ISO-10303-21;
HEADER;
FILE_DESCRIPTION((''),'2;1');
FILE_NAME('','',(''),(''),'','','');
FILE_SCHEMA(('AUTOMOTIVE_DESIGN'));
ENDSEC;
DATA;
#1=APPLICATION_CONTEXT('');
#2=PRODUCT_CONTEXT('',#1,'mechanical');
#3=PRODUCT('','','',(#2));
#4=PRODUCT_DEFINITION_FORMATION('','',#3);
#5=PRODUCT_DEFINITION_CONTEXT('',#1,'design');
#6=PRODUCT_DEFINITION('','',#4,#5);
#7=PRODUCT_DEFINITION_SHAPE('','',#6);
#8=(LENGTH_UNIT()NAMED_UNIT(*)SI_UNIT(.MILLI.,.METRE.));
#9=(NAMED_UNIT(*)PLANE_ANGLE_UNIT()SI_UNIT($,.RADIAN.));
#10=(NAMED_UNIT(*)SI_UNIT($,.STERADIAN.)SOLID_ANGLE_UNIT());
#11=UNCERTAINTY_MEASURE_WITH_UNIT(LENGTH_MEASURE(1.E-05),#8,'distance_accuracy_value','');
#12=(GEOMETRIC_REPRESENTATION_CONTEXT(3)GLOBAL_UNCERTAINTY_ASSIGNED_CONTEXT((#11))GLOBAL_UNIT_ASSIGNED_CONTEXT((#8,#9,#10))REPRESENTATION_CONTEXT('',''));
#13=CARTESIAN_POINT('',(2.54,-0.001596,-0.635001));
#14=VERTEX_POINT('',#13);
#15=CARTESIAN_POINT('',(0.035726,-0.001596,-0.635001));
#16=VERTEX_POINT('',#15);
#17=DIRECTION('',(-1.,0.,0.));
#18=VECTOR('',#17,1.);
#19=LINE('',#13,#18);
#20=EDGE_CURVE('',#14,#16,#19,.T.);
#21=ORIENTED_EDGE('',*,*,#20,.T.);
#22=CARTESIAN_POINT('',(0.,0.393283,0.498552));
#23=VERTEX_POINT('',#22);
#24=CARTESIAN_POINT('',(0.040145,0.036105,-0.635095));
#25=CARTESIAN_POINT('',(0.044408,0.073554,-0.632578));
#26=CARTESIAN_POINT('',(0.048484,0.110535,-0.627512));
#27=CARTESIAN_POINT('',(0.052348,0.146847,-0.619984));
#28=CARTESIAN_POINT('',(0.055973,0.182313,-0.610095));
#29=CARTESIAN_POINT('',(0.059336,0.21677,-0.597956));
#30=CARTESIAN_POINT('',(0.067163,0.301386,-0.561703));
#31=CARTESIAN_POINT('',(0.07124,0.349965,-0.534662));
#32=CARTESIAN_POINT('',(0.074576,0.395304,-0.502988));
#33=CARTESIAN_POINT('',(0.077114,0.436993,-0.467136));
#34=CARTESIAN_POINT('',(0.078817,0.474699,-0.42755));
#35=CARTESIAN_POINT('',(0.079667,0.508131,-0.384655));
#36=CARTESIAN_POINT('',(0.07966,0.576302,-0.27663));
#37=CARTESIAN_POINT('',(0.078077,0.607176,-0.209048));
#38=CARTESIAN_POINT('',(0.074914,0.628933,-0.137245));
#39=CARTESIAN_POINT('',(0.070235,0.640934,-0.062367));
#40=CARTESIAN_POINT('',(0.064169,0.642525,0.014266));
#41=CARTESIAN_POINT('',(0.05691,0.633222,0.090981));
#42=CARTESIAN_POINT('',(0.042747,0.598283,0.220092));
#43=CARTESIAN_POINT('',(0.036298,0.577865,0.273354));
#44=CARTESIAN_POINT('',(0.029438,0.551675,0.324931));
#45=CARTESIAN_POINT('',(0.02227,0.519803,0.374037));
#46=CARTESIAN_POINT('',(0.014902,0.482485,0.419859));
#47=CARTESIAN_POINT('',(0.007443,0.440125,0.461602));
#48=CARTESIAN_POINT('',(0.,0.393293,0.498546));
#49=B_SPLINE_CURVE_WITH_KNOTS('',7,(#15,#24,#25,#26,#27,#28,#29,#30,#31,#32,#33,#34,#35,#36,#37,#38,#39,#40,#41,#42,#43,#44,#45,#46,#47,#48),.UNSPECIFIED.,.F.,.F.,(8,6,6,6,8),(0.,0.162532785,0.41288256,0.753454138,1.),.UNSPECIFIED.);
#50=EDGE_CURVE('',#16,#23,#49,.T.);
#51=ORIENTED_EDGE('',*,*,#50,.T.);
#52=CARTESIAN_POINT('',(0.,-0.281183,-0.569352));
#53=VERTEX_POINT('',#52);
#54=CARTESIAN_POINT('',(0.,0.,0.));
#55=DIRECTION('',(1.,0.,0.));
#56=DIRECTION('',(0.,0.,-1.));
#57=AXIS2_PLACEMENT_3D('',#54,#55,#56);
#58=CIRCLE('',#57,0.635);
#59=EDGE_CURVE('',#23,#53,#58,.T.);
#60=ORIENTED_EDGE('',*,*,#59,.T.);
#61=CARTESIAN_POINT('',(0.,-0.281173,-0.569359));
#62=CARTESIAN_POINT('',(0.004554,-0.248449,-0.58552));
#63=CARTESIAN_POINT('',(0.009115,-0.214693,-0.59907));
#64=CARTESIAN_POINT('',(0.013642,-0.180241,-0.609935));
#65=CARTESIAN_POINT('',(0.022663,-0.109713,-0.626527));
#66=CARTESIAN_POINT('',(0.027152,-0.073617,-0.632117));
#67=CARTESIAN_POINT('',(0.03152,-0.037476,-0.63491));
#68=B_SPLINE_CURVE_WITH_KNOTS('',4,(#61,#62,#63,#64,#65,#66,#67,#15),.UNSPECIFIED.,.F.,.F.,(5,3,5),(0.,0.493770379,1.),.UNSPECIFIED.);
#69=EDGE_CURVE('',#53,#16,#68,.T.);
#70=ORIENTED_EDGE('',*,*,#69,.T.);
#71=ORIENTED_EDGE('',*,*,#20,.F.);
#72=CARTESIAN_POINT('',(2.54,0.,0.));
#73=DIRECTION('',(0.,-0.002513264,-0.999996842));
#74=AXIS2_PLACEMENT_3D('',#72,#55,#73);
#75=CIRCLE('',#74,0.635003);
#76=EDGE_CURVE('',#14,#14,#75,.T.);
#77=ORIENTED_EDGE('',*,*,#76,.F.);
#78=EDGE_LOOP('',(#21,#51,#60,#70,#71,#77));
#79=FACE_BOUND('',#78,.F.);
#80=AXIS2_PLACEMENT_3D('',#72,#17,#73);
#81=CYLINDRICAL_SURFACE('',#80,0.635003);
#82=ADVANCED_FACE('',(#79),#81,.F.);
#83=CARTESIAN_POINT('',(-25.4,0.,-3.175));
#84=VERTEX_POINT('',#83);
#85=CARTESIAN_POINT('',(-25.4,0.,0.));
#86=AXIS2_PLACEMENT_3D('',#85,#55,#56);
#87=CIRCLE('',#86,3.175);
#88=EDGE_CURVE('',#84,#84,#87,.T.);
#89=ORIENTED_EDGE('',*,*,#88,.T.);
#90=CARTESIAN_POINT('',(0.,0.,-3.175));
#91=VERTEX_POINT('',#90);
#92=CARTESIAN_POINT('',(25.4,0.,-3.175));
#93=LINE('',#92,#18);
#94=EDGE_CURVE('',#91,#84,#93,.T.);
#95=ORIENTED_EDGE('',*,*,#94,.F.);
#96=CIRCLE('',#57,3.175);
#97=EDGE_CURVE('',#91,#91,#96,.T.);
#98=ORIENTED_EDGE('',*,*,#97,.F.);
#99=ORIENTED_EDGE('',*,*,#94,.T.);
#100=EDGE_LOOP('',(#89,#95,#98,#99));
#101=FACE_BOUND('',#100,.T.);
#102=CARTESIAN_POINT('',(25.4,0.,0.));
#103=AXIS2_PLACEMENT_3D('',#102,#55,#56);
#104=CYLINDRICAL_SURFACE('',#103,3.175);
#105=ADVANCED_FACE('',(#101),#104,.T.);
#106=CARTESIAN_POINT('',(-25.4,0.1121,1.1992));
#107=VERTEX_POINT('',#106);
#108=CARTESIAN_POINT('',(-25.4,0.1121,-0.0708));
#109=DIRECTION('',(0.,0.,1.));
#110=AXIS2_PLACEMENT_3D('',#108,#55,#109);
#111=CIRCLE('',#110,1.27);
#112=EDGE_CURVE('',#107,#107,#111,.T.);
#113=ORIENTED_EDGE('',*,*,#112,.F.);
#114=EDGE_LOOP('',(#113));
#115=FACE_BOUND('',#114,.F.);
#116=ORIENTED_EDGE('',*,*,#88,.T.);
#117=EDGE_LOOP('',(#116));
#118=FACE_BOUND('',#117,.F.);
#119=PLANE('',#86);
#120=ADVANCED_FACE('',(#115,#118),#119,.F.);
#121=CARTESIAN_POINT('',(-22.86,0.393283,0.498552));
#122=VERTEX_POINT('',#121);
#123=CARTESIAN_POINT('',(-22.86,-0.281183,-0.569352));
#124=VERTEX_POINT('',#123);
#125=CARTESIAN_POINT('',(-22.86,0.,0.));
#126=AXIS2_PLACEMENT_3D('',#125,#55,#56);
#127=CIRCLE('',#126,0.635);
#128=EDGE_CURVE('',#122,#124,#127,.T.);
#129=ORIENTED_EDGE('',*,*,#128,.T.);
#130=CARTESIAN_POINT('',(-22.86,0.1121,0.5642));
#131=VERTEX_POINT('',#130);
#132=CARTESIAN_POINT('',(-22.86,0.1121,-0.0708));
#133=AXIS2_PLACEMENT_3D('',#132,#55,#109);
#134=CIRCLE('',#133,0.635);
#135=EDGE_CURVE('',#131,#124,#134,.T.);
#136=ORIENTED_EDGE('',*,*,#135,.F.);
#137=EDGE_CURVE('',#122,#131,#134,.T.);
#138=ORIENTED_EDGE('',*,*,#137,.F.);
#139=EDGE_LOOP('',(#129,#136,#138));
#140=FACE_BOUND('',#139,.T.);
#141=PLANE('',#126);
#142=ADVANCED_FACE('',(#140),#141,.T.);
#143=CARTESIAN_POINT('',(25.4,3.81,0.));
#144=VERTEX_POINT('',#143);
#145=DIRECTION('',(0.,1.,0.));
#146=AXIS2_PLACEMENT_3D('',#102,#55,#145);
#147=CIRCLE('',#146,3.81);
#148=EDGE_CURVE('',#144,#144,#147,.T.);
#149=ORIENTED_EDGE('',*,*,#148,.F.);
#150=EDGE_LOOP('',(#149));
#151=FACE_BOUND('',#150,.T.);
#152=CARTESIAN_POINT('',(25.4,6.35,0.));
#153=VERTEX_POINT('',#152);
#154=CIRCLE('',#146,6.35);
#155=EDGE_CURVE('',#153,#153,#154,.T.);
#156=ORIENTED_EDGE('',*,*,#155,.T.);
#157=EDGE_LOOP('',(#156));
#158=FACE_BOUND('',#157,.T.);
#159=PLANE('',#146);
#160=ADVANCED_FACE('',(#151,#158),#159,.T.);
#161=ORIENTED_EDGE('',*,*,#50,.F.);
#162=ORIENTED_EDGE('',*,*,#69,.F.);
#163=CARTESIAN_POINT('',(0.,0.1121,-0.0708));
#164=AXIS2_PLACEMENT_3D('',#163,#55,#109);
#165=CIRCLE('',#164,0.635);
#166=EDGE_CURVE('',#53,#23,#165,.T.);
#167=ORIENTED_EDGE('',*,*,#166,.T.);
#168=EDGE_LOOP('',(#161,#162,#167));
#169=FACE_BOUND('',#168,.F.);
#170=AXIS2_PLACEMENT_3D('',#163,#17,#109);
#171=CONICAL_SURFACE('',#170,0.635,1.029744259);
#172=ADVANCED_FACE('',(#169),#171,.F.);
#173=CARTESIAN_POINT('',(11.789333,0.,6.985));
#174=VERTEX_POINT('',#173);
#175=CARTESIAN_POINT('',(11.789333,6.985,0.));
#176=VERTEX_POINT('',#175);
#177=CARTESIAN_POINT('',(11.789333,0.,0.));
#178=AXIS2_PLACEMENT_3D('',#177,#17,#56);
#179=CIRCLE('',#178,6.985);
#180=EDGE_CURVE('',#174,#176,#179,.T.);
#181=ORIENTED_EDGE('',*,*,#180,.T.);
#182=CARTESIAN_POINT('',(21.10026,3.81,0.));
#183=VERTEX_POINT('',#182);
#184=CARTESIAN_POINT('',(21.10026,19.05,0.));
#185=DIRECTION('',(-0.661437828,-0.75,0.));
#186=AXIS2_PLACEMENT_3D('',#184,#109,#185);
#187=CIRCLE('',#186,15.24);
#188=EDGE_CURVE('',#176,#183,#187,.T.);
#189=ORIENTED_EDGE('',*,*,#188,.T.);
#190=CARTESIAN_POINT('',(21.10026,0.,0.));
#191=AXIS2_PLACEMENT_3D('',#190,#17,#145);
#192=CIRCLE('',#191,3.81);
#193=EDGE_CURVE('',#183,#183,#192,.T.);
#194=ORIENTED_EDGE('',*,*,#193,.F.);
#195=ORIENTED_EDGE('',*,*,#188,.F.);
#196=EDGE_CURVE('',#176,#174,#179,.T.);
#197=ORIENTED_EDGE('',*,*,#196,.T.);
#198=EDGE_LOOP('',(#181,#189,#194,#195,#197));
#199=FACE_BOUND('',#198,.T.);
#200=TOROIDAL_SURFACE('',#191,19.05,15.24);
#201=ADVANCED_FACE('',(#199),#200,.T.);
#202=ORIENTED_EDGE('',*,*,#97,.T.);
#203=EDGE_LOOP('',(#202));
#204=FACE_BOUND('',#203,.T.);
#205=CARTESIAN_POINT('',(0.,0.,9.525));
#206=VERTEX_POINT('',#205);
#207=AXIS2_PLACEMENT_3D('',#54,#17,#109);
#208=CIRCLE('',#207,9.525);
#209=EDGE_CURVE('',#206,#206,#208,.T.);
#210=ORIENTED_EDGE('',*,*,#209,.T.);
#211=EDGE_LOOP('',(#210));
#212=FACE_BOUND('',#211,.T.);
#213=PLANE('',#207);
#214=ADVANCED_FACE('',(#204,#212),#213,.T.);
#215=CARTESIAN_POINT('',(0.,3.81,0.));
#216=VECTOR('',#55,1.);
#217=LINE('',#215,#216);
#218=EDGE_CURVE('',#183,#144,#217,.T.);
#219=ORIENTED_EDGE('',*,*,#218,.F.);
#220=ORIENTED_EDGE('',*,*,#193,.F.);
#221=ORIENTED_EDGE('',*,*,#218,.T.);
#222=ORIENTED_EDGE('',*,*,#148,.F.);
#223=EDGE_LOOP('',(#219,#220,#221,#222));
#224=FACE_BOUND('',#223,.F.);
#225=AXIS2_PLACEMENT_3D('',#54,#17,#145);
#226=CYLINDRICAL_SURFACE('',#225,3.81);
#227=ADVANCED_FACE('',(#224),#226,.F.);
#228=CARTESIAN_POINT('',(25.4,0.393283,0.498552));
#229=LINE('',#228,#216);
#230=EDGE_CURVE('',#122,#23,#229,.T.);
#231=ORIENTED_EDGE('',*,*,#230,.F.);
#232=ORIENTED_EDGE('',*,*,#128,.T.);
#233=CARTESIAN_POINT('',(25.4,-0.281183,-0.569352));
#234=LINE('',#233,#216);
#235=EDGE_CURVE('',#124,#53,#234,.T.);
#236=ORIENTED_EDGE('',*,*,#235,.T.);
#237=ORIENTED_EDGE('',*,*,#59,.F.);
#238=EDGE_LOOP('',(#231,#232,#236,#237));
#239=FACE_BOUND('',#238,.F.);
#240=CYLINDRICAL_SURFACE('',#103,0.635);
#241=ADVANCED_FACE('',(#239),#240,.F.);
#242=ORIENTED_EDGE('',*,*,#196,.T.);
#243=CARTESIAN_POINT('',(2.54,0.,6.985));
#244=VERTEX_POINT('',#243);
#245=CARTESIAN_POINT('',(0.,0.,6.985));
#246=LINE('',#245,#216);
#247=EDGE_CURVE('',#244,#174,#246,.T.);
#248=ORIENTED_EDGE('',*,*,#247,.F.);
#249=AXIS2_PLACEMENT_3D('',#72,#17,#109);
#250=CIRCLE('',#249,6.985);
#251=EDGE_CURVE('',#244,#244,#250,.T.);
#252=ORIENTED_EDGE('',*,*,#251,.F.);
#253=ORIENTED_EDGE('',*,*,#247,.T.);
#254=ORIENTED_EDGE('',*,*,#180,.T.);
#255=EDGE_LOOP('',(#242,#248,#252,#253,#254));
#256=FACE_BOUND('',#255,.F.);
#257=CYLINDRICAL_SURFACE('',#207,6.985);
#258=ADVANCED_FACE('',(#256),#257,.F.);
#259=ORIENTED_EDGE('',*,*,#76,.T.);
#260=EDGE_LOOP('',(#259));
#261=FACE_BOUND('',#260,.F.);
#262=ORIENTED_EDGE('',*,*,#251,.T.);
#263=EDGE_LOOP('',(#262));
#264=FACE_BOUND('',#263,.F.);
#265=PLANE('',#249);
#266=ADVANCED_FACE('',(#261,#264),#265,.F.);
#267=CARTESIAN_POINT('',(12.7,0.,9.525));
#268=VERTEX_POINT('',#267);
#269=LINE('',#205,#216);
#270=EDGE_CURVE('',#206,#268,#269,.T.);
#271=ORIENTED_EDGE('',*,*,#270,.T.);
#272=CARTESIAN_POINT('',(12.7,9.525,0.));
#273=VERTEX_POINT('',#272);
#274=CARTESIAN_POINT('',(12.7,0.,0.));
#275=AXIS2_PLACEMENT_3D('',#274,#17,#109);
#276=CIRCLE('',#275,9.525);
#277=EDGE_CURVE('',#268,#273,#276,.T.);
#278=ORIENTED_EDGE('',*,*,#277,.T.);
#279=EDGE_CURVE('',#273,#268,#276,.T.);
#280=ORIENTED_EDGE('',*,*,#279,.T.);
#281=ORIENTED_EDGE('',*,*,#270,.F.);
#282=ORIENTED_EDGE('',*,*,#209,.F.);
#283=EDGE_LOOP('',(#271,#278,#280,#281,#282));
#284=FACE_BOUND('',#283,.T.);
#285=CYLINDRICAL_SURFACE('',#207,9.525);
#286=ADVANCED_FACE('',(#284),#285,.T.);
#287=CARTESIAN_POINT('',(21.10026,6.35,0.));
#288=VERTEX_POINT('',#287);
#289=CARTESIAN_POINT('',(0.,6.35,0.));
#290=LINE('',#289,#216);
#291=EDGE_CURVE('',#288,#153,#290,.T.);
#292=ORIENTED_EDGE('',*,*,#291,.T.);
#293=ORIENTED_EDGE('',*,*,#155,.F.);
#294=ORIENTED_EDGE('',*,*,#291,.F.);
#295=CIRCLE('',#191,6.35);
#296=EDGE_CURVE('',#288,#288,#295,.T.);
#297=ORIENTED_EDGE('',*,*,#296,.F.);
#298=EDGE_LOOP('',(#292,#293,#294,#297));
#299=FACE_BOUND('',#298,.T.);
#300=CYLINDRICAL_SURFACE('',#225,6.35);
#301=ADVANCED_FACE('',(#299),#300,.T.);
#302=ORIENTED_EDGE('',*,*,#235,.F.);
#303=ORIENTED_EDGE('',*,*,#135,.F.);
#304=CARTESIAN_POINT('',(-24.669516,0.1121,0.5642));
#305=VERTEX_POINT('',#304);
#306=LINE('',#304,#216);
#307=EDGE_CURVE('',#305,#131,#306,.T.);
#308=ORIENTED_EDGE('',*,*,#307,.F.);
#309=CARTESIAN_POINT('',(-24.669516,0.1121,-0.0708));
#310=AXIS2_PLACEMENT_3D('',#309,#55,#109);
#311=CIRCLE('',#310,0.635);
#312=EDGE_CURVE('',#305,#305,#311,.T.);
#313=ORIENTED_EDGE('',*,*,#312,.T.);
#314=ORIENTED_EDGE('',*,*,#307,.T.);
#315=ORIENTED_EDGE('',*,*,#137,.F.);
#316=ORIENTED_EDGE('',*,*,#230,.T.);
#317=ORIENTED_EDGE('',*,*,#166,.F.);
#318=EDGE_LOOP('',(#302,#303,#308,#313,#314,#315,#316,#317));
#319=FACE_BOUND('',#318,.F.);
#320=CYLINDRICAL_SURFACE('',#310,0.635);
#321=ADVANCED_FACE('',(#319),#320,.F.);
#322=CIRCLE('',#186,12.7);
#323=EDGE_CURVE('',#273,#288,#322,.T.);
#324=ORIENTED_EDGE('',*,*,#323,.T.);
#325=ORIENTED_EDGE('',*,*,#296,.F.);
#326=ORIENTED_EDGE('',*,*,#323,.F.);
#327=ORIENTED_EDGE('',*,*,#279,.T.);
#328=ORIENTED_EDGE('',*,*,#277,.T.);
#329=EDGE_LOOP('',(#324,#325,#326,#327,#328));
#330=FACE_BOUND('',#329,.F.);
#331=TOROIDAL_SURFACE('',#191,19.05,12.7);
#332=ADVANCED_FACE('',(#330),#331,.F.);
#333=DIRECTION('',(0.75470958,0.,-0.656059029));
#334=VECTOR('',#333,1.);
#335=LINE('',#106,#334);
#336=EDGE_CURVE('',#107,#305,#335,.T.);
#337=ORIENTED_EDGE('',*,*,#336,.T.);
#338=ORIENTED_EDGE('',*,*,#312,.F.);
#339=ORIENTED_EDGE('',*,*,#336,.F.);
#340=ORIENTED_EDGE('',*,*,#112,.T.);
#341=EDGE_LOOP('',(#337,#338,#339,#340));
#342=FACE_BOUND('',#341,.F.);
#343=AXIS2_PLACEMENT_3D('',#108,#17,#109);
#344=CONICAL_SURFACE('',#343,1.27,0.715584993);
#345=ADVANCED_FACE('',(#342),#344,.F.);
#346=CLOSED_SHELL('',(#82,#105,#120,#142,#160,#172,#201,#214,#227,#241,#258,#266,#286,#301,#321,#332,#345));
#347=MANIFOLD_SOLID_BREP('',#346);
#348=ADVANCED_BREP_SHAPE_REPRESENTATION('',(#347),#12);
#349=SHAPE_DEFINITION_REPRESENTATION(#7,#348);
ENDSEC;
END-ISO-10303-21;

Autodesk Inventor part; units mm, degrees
ref_plane "YZ Plane" through (0, 0, 0) normal (1, 0, 0) x (0, 1, 0)
ref_plane "XZ Plane" through (0, 0, 0) normal (0, 1, 0) x (-1, 0, 0)
ref_plane "XY Plane" through (0, 0, 0) normal (0, 0, 1) x (1, 0, 0)
sketch "Sketch1" plane through (0, 0, 0) normal (1, 0, 0) x (0, 1, 0)
  circle A0 centre (0, 0) radius 3.175
  circle A1 centre (0, 0) radius 6.35
  dimension "d0" = 6.35
  dimension "d1" = 12.7
extrude "Extrusion1" add sketch "Sketch1" along normal blind 25.4
sketch "Sketch2" plane through (25.4, 0, 0) normal (1, 0, 0) x (0, 0, -1)
  circle A0 centre (0, 0) radius 3.175 projected
  circle A1 centre (0, 0) radius 3.175
extrude "Extrusion2" add sketch "Sketch2" against normal blind 50.8
sketch "Sketch3" plane through (0, 0, 0) normal (-1, 0, 0) x (0, 0, 1)
  circle A0 centre (0, 0) radius 9.525
  dimension "d6" = 19.05
extrude "Extrusion3" add sketch "Sketch3" against normal blind 12.7
fillet "Fillet1" radius 12.7 1 edges at (12.7, -6.35, 0)
shell "Shell1" thickness 2.54 removed faces 1 at (25.4, -1.8127, -0.4771)
hole "Hole1" at (-25.4, 0.1121, -0.0708) direction (1, 0, 0) diameter 1.27 depth 25.4 tip angle 118 countersink diameter 2.54 countersink angle 82
